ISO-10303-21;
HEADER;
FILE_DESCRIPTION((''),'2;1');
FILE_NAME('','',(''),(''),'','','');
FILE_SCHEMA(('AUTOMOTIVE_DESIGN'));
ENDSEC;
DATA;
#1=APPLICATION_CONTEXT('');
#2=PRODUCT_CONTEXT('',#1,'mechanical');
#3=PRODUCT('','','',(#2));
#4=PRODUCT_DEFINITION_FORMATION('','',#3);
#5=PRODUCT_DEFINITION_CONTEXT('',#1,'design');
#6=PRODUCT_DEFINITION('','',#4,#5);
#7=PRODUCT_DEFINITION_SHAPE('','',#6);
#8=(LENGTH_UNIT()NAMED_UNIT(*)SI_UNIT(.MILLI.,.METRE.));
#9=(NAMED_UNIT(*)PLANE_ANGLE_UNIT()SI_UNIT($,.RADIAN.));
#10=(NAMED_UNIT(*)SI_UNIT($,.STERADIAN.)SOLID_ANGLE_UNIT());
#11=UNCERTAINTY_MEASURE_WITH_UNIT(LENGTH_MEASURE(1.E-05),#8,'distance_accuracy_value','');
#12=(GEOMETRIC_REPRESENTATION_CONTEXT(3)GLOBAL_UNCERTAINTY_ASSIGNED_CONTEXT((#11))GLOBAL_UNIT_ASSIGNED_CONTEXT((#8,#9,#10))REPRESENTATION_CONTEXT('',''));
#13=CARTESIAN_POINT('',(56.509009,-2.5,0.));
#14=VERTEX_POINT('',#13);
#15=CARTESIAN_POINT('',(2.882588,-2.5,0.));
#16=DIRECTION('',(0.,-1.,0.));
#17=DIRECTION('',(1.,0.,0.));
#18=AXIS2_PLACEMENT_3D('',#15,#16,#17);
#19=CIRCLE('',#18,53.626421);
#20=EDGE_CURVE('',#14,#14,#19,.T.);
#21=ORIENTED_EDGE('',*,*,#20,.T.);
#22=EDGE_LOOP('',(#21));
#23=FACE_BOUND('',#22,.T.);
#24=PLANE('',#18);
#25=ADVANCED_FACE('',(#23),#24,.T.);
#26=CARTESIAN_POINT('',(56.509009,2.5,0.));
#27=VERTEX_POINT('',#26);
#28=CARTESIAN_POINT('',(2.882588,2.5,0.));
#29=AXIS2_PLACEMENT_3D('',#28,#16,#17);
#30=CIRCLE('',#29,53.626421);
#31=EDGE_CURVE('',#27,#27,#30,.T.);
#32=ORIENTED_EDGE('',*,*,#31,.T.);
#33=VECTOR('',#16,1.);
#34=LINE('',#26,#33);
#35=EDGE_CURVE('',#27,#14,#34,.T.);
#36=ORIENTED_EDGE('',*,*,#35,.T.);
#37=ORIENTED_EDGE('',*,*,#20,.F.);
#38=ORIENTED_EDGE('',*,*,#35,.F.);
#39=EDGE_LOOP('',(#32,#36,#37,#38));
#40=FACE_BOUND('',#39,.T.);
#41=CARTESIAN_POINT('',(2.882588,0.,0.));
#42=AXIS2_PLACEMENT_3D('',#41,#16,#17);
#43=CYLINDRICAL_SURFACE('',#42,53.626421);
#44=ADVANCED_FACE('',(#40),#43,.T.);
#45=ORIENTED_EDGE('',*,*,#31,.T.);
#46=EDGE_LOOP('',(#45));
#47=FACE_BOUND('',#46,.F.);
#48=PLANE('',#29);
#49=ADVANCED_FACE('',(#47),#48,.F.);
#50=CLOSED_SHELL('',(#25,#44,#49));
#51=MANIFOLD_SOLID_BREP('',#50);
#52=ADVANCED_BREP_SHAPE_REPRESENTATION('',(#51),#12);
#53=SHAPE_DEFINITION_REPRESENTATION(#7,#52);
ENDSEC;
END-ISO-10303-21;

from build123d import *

# Parameters (mm, degrees)
F0_R     = 53.6264206078
F1_DEPTH = 2.5


# Not quite as in the source:
# - a feature of the source that left no trace in its solid (it failed there, or was rolled back) is left out


with BuildPart() as f1:
    # F0 (on Front) → F1 (new body, symmetric)
    with BuildSketch(Plane.XZ):
        with Locations((2.8825884219, 0)):
            Circle(F0_R)
    extrude(amount=F1_DEPTH, both=True)


solid = f1.part
